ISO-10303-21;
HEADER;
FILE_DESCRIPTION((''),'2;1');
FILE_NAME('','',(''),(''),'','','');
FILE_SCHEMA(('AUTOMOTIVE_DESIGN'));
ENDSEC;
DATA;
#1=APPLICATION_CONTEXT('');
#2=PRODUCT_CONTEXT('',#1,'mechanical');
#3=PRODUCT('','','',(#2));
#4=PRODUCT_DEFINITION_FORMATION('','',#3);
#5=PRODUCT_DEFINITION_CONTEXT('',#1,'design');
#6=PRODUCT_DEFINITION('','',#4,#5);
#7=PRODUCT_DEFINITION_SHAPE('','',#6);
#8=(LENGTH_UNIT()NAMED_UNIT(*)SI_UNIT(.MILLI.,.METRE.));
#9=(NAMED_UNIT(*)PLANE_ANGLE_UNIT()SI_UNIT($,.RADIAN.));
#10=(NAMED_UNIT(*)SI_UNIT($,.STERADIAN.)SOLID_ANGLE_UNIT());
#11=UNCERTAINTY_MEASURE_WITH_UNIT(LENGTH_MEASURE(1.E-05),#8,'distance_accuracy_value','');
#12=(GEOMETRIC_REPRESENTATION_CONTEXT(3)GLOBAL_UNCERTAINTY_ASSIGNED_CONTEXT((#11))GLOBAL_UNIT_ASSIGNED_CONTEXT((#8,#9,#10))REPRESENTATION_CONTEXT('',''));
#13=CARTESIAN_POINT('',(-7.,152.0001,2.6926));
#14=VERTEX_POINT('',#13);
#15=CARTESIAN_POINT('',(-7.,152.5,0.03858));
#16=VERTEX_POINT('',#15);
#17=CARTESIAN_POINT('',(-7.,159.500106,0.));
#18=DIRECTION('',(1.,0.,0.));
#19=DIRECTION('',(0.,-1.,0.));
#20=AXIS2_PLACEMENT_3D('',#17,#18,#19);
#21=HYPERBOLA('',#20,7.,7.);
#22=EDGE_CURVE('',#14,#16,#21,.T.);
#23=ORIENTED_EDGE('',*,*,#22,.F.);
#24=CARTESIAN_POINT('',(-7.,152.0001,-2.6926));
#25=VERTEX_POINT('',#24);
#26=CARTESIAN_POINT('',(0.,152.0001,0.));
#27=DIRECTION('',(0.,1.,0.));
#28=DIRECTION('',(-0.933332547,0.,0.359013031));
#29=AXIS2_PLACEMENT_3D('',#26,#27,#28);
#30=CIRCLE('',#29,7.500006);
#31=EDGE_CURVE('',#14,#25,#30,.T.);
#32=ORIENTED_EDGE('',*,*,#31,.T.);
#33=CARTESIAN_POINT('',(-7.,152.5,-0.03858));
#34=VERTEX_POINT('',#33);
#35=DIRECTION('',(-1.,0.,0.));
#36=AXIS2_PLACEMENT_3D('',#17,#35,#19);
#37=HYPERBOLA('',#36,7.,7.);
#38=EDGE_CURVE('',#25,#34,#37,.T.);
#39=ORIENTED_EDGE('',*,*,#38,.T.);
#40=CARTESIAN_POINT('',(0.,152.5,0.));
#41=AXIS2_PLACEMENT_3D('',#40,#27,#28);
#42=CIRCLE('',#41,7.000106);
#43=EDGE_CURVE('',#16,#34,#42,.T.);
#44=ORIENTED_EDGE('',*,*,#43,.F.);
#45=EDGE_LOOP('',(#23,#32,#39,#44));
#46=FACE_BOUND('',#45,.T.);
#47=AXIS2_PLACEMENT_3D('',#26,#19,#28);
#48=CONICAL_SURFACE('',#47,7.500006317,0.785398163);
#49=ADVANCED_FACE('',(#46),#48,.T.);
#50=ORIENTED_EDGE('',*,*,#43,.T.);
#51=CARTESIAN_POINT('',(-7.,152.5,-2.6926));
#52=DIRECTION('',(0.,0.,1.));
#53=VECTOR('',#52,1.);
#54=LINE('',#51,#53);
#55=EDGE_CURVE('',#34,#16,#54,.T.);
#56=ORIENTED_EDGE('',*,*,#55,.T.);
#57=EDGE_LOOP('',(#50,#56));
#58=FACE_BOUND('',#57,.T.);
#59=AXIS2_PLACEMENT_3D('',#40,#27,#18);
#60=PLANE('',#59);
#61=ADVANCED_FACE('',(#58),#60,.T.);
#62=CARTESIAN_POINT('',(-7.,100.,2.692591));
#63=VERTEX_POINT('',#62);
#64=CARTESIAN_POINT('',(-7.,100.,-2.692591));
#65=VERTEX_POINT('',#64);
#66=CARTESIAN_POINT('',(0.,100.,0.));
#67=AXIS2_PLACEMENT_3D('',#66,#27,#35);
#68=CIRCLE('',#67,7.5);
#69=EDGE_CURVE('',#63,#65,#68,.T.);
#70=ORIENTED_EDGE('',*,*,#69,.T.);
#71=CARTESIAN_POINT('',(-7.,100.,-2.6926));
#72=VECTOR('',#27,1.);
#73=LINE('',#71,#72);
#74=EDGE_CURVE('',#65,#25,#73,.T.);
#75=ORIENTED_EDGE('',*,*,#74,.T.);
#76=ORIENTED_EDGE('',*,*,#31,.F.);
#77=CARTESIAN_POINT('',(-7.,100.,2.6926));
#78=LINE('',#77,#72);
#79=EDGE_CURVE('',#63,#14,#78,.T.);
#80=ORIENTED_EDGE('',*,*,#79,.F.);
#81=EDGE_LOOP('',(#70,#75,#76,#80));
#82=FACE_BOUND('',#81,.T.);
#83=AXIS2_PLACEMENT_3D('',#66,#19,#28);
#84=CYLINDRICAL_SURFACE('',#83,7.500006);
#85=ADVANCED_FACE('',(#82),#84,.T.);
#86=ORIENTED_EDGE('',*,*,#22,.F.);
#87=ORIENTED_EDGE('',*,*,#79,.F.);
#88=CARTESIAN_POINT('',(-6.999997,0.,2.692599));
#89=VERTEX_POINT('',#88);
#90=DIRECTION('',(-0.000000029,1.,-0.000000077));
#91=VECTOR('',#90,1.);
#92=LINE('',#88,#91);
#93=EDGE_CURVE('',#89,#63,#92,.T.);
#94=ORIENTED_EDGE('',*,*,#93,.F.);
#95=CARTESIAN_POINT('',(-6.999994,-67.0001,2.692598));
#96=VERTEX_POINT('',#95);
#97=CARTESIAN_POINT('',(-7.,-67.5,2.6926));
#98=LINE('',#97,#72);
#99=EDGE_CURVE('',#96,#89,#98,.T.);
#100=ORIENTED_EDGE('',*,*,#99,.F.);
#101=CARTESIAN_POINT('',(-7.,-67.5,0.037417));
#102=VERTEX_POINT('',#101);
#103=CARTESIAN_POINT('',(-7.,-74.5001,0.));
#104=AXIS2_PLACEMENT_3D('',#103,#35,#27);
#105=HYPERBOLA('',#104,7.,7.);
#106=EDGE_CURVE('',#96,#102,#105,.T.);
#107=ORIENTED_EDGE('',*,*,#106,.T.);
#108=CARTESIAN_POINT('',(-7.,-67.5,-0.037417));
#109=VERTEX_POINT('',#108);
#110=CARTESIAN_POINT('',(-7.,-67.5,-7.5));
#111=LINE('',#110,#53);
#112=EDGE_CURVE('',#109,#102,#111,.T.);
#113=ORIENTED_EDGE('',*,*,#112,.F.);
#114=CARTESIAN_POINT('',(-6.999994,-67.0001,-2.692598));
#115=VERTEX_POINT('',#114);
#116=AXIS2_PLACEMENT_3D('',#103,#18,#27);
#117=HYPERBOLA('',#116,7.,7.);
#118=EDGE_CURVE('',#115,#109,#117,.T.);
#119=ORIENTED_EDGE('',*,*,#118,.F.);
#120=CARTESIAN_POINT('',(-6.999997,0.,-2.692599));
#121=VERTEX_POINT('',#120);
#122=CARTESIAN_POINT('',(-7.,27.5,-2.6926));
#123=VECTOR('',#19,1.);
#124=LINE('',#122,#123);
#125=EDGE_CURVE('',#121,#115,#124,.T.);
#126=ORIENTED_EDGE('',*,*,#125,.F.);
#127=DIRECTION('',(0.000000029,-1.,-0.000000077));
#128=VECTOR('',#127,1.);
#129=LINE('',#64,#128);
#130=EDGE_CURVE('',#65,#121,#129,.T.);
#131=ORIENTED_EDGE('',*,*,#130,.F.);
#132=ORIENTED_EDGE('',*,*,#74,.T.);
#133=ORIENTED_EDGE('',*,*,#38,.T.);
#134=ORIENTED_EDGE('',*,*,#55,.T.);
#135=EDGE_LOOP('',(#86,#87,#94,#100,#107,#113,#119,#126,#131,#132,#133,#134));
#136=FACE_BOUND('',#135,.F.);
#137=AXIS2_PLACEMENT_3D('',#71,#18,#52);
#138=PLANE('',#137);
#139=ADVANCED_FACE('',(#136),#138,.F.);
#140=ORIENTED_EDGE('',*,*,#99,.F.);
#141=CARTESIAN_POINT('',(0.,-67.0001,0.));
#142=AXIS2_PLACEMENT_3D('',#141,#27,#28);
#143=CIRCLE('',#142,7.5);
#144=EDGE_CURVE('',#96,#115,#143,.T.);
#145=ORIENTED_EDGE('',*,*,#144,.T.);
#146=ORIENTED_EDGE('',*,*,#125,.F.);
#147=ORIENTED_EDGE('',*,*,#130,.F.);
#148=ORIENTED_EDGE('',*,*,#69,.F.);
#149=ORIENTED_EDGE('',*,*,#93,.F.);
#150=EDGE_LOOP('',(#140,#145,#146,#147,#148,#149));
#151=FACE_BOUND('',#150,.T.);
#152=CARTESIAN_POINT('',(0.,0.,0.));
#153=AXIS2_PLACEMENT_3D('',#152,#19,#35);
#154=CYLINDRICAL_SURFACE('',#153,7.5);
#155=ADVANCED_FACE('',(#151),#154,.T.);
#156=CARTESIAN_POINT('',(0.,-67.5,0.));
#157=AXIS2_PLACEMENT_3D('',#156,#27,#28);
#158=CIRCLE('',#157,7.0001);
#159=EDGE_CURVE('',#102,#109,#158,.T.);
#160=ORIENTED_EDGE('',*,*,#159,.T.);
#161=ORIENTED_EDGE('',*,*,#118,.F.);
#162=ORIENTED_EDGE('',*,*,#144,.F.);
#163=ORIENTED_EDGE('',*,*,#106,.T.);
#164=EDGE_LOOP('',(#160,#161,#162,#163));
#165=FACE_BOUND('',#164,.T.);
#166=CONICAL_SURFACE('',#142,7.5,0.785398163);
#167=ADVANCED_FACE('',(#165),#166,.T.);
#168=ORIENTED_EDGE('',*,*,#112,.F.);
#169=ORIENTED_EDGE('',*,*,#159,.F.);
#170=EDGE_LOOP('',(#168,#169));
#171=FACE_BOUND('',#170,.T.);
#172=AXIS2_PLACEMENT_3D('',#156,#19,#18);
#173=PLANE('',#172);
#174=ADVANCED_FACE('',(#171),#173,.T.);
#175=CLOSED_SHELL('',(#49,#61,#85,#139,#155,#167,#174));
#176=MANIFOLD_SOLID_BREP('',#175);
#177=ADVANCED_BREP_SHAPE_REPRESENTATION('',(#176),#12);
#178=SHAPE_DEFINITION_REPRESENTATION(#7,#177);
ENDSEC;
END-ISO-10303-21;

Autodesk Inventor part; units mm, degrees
sketch "Sketch1" plane through (0, 0, 0) normal (0, 1, 0) x (-1, 0, 0)
  circle A0 centre (0, 0) radius 7.5
  dimension "d0" = 15
extrude "Extrusion1" add sketch "Sketch1" along normal blind 100
ref_plane "Work Plane1" through (0, 72.5, 0) normal (0, 1, 0) x (1, 0, 0)
sketch "Sketch2" plane through (0, 72.5, 0) normal (0, 1, 0) x (1, 0, 0)
  circle A0 centre (0, 0) radius 7.5 projected
ref_plane "Work Plane2" through (-7.5, 0, 0) normal (1, 0, 0) x (0, 1, 0)
ref_plane "Work Plane3" through (0, 27.5, 0) normal (0, -1, 0) x (1, 0, 0)
sketch "Sketch3" plane through (-7.5, 0, 0) normal (1, 0, 0) x (0, 1, 0)
  line L0 (27.5, -10.5) -> (27.5, 10.5) projected
  line L1 (72.5, 10.5) -> (72.5, -10.5) projected
  line L2 (0, -7.5) -> (0, 7.5) projected
  line L3 (27.5, -3) -> (0, -3)
  line L4 (0, -3) -> (0, 3)
  line L5 (0, 3) -> (27.5, 3)
  line L6 (27.5, 3) -> (27.5, -3)
  line L7 (100, -7.5) -> (100, 7.5) projected
  line L8 (72.5, -3) -> (100, -3)
  line L9 (100, -3) -> (100, 3)
  line L10 (100, 3) -> (72.5, 3)
  line L11 (72.5, 3) -> (72.5, -3)
  line L12 (27.5, -3) -> (72.5, -3)
  line L13 (72.5, -3) -> (72.5, 3)
  line L14 (72.5, 3) -> (27.5, 3)
  line L15 (27.5, 3) -> (27.5, -3)
  point P0 (0, 0)
extrude "Extrusion3" cut sketch "Sketch3" along normal blind 0.5 contours L0 L14 L1 L12 | L1 L10 L7 L8
extrude "Extrusion2" [suppressed]
chamfer "Chamfer1" [suppressed]
sketch "Sketch4" plane through (0, 0, 0) normal (0, -1, 0) x (1, 0, 0)
  circle A0 centre (0, 0) radius 7.5 projected
  circle A1 centre (0, 0) radius 7.5
extrude "Extrusion4" add sketch "Sketch4" along normal blind 67.5
sketch "Sketch5" plane through (0, 100, 0) normal (0, 1, 0) x (1, 0, 0)
  arc A0 (-7, -2.6926) -> (-7, 2.6926) centre (0, 0) ccw projected
  line L0 (-7, 2.6926) -> (-7, -2.6926) projected
  arc A1 (-7, -2.6926) -> (-7, 2.6926) centre (0, 0) ccw projected
  point P0 (-7, 2.6926)
extrude "Extrusion5" add sketch "Sketch5" along normal blind 52.5
sketch "Sketch6" plane through (-7, 0, 0) normal (-1, 0, 0) x (0, 0, 1)
  line L0 (-2.6926, 27.5) -> (-2.6926, 152.5) projected
  line L1 (2.6926, 152.5) -> (2.6926, 27.5) projected
  line L2 (-2.6926, 152.5) -> (2.6926, 152.5) projected
  line L3 (-2.6926, 152.5) -> (2.6926, 152.5) projected
  line L4 (0, 152.5) -> (0, 72.5)
  line L5 (0, 152.5) -> (80, 152.5) construction
  circle A0 centre (0, 72.5) radius 1.25
  circle A1 centre (0, 72.5) radius 0.75 projected
  circle A2 centre (0, 72.5) radius 0.75
  line L6 (-7.5, -67.5) -> (7.5, -67.5) projected
  line L7 (-2.6926, 26.1771) -> (2.6926, 26.1771)
  line L8 (2.6926, 26.1771) -> (2.6926, -67.5)
  line L9 (2.6926, -67.5) -> (-2.6926, -67.5)
  line L10 (-2.6926, -67.5) -> (-2.6926, 26.1771)
  line L11 (2.6926, 27.5) -> (-2.6926, 27.5) projected
  line L12 (2.6926, 26.1771) -> (2.6926, 27.5)
  line L13 (-2.6926, 27.5) -> (-2.6926, 152.5) projected
  line L14 (-2.6926, 26.1771) -> (-2.6926, 27.5)
  point P0 (0, 0)
  dimension "d23" = 80
  dimension "d24" = 90
  dimension "d25" = 2.5
  dimension "d26" = 1.5
extrude "Extrusion6" [suppressed]
chamfer "Chamfer3" [suppressed]
extrude "Extrusion7" cut sketch "Sketch6" along normal blind 0.5 contours L11 L12 L7 L14 | L7 L8 L6 L10
chamfer "Chamfer4" distance 0.5 angle 45 2 edges at (7.5, 152.5, 0) (7.5, -67.5, 0)
properties part number "wał_uzębienia" material "Stainless Steel"
